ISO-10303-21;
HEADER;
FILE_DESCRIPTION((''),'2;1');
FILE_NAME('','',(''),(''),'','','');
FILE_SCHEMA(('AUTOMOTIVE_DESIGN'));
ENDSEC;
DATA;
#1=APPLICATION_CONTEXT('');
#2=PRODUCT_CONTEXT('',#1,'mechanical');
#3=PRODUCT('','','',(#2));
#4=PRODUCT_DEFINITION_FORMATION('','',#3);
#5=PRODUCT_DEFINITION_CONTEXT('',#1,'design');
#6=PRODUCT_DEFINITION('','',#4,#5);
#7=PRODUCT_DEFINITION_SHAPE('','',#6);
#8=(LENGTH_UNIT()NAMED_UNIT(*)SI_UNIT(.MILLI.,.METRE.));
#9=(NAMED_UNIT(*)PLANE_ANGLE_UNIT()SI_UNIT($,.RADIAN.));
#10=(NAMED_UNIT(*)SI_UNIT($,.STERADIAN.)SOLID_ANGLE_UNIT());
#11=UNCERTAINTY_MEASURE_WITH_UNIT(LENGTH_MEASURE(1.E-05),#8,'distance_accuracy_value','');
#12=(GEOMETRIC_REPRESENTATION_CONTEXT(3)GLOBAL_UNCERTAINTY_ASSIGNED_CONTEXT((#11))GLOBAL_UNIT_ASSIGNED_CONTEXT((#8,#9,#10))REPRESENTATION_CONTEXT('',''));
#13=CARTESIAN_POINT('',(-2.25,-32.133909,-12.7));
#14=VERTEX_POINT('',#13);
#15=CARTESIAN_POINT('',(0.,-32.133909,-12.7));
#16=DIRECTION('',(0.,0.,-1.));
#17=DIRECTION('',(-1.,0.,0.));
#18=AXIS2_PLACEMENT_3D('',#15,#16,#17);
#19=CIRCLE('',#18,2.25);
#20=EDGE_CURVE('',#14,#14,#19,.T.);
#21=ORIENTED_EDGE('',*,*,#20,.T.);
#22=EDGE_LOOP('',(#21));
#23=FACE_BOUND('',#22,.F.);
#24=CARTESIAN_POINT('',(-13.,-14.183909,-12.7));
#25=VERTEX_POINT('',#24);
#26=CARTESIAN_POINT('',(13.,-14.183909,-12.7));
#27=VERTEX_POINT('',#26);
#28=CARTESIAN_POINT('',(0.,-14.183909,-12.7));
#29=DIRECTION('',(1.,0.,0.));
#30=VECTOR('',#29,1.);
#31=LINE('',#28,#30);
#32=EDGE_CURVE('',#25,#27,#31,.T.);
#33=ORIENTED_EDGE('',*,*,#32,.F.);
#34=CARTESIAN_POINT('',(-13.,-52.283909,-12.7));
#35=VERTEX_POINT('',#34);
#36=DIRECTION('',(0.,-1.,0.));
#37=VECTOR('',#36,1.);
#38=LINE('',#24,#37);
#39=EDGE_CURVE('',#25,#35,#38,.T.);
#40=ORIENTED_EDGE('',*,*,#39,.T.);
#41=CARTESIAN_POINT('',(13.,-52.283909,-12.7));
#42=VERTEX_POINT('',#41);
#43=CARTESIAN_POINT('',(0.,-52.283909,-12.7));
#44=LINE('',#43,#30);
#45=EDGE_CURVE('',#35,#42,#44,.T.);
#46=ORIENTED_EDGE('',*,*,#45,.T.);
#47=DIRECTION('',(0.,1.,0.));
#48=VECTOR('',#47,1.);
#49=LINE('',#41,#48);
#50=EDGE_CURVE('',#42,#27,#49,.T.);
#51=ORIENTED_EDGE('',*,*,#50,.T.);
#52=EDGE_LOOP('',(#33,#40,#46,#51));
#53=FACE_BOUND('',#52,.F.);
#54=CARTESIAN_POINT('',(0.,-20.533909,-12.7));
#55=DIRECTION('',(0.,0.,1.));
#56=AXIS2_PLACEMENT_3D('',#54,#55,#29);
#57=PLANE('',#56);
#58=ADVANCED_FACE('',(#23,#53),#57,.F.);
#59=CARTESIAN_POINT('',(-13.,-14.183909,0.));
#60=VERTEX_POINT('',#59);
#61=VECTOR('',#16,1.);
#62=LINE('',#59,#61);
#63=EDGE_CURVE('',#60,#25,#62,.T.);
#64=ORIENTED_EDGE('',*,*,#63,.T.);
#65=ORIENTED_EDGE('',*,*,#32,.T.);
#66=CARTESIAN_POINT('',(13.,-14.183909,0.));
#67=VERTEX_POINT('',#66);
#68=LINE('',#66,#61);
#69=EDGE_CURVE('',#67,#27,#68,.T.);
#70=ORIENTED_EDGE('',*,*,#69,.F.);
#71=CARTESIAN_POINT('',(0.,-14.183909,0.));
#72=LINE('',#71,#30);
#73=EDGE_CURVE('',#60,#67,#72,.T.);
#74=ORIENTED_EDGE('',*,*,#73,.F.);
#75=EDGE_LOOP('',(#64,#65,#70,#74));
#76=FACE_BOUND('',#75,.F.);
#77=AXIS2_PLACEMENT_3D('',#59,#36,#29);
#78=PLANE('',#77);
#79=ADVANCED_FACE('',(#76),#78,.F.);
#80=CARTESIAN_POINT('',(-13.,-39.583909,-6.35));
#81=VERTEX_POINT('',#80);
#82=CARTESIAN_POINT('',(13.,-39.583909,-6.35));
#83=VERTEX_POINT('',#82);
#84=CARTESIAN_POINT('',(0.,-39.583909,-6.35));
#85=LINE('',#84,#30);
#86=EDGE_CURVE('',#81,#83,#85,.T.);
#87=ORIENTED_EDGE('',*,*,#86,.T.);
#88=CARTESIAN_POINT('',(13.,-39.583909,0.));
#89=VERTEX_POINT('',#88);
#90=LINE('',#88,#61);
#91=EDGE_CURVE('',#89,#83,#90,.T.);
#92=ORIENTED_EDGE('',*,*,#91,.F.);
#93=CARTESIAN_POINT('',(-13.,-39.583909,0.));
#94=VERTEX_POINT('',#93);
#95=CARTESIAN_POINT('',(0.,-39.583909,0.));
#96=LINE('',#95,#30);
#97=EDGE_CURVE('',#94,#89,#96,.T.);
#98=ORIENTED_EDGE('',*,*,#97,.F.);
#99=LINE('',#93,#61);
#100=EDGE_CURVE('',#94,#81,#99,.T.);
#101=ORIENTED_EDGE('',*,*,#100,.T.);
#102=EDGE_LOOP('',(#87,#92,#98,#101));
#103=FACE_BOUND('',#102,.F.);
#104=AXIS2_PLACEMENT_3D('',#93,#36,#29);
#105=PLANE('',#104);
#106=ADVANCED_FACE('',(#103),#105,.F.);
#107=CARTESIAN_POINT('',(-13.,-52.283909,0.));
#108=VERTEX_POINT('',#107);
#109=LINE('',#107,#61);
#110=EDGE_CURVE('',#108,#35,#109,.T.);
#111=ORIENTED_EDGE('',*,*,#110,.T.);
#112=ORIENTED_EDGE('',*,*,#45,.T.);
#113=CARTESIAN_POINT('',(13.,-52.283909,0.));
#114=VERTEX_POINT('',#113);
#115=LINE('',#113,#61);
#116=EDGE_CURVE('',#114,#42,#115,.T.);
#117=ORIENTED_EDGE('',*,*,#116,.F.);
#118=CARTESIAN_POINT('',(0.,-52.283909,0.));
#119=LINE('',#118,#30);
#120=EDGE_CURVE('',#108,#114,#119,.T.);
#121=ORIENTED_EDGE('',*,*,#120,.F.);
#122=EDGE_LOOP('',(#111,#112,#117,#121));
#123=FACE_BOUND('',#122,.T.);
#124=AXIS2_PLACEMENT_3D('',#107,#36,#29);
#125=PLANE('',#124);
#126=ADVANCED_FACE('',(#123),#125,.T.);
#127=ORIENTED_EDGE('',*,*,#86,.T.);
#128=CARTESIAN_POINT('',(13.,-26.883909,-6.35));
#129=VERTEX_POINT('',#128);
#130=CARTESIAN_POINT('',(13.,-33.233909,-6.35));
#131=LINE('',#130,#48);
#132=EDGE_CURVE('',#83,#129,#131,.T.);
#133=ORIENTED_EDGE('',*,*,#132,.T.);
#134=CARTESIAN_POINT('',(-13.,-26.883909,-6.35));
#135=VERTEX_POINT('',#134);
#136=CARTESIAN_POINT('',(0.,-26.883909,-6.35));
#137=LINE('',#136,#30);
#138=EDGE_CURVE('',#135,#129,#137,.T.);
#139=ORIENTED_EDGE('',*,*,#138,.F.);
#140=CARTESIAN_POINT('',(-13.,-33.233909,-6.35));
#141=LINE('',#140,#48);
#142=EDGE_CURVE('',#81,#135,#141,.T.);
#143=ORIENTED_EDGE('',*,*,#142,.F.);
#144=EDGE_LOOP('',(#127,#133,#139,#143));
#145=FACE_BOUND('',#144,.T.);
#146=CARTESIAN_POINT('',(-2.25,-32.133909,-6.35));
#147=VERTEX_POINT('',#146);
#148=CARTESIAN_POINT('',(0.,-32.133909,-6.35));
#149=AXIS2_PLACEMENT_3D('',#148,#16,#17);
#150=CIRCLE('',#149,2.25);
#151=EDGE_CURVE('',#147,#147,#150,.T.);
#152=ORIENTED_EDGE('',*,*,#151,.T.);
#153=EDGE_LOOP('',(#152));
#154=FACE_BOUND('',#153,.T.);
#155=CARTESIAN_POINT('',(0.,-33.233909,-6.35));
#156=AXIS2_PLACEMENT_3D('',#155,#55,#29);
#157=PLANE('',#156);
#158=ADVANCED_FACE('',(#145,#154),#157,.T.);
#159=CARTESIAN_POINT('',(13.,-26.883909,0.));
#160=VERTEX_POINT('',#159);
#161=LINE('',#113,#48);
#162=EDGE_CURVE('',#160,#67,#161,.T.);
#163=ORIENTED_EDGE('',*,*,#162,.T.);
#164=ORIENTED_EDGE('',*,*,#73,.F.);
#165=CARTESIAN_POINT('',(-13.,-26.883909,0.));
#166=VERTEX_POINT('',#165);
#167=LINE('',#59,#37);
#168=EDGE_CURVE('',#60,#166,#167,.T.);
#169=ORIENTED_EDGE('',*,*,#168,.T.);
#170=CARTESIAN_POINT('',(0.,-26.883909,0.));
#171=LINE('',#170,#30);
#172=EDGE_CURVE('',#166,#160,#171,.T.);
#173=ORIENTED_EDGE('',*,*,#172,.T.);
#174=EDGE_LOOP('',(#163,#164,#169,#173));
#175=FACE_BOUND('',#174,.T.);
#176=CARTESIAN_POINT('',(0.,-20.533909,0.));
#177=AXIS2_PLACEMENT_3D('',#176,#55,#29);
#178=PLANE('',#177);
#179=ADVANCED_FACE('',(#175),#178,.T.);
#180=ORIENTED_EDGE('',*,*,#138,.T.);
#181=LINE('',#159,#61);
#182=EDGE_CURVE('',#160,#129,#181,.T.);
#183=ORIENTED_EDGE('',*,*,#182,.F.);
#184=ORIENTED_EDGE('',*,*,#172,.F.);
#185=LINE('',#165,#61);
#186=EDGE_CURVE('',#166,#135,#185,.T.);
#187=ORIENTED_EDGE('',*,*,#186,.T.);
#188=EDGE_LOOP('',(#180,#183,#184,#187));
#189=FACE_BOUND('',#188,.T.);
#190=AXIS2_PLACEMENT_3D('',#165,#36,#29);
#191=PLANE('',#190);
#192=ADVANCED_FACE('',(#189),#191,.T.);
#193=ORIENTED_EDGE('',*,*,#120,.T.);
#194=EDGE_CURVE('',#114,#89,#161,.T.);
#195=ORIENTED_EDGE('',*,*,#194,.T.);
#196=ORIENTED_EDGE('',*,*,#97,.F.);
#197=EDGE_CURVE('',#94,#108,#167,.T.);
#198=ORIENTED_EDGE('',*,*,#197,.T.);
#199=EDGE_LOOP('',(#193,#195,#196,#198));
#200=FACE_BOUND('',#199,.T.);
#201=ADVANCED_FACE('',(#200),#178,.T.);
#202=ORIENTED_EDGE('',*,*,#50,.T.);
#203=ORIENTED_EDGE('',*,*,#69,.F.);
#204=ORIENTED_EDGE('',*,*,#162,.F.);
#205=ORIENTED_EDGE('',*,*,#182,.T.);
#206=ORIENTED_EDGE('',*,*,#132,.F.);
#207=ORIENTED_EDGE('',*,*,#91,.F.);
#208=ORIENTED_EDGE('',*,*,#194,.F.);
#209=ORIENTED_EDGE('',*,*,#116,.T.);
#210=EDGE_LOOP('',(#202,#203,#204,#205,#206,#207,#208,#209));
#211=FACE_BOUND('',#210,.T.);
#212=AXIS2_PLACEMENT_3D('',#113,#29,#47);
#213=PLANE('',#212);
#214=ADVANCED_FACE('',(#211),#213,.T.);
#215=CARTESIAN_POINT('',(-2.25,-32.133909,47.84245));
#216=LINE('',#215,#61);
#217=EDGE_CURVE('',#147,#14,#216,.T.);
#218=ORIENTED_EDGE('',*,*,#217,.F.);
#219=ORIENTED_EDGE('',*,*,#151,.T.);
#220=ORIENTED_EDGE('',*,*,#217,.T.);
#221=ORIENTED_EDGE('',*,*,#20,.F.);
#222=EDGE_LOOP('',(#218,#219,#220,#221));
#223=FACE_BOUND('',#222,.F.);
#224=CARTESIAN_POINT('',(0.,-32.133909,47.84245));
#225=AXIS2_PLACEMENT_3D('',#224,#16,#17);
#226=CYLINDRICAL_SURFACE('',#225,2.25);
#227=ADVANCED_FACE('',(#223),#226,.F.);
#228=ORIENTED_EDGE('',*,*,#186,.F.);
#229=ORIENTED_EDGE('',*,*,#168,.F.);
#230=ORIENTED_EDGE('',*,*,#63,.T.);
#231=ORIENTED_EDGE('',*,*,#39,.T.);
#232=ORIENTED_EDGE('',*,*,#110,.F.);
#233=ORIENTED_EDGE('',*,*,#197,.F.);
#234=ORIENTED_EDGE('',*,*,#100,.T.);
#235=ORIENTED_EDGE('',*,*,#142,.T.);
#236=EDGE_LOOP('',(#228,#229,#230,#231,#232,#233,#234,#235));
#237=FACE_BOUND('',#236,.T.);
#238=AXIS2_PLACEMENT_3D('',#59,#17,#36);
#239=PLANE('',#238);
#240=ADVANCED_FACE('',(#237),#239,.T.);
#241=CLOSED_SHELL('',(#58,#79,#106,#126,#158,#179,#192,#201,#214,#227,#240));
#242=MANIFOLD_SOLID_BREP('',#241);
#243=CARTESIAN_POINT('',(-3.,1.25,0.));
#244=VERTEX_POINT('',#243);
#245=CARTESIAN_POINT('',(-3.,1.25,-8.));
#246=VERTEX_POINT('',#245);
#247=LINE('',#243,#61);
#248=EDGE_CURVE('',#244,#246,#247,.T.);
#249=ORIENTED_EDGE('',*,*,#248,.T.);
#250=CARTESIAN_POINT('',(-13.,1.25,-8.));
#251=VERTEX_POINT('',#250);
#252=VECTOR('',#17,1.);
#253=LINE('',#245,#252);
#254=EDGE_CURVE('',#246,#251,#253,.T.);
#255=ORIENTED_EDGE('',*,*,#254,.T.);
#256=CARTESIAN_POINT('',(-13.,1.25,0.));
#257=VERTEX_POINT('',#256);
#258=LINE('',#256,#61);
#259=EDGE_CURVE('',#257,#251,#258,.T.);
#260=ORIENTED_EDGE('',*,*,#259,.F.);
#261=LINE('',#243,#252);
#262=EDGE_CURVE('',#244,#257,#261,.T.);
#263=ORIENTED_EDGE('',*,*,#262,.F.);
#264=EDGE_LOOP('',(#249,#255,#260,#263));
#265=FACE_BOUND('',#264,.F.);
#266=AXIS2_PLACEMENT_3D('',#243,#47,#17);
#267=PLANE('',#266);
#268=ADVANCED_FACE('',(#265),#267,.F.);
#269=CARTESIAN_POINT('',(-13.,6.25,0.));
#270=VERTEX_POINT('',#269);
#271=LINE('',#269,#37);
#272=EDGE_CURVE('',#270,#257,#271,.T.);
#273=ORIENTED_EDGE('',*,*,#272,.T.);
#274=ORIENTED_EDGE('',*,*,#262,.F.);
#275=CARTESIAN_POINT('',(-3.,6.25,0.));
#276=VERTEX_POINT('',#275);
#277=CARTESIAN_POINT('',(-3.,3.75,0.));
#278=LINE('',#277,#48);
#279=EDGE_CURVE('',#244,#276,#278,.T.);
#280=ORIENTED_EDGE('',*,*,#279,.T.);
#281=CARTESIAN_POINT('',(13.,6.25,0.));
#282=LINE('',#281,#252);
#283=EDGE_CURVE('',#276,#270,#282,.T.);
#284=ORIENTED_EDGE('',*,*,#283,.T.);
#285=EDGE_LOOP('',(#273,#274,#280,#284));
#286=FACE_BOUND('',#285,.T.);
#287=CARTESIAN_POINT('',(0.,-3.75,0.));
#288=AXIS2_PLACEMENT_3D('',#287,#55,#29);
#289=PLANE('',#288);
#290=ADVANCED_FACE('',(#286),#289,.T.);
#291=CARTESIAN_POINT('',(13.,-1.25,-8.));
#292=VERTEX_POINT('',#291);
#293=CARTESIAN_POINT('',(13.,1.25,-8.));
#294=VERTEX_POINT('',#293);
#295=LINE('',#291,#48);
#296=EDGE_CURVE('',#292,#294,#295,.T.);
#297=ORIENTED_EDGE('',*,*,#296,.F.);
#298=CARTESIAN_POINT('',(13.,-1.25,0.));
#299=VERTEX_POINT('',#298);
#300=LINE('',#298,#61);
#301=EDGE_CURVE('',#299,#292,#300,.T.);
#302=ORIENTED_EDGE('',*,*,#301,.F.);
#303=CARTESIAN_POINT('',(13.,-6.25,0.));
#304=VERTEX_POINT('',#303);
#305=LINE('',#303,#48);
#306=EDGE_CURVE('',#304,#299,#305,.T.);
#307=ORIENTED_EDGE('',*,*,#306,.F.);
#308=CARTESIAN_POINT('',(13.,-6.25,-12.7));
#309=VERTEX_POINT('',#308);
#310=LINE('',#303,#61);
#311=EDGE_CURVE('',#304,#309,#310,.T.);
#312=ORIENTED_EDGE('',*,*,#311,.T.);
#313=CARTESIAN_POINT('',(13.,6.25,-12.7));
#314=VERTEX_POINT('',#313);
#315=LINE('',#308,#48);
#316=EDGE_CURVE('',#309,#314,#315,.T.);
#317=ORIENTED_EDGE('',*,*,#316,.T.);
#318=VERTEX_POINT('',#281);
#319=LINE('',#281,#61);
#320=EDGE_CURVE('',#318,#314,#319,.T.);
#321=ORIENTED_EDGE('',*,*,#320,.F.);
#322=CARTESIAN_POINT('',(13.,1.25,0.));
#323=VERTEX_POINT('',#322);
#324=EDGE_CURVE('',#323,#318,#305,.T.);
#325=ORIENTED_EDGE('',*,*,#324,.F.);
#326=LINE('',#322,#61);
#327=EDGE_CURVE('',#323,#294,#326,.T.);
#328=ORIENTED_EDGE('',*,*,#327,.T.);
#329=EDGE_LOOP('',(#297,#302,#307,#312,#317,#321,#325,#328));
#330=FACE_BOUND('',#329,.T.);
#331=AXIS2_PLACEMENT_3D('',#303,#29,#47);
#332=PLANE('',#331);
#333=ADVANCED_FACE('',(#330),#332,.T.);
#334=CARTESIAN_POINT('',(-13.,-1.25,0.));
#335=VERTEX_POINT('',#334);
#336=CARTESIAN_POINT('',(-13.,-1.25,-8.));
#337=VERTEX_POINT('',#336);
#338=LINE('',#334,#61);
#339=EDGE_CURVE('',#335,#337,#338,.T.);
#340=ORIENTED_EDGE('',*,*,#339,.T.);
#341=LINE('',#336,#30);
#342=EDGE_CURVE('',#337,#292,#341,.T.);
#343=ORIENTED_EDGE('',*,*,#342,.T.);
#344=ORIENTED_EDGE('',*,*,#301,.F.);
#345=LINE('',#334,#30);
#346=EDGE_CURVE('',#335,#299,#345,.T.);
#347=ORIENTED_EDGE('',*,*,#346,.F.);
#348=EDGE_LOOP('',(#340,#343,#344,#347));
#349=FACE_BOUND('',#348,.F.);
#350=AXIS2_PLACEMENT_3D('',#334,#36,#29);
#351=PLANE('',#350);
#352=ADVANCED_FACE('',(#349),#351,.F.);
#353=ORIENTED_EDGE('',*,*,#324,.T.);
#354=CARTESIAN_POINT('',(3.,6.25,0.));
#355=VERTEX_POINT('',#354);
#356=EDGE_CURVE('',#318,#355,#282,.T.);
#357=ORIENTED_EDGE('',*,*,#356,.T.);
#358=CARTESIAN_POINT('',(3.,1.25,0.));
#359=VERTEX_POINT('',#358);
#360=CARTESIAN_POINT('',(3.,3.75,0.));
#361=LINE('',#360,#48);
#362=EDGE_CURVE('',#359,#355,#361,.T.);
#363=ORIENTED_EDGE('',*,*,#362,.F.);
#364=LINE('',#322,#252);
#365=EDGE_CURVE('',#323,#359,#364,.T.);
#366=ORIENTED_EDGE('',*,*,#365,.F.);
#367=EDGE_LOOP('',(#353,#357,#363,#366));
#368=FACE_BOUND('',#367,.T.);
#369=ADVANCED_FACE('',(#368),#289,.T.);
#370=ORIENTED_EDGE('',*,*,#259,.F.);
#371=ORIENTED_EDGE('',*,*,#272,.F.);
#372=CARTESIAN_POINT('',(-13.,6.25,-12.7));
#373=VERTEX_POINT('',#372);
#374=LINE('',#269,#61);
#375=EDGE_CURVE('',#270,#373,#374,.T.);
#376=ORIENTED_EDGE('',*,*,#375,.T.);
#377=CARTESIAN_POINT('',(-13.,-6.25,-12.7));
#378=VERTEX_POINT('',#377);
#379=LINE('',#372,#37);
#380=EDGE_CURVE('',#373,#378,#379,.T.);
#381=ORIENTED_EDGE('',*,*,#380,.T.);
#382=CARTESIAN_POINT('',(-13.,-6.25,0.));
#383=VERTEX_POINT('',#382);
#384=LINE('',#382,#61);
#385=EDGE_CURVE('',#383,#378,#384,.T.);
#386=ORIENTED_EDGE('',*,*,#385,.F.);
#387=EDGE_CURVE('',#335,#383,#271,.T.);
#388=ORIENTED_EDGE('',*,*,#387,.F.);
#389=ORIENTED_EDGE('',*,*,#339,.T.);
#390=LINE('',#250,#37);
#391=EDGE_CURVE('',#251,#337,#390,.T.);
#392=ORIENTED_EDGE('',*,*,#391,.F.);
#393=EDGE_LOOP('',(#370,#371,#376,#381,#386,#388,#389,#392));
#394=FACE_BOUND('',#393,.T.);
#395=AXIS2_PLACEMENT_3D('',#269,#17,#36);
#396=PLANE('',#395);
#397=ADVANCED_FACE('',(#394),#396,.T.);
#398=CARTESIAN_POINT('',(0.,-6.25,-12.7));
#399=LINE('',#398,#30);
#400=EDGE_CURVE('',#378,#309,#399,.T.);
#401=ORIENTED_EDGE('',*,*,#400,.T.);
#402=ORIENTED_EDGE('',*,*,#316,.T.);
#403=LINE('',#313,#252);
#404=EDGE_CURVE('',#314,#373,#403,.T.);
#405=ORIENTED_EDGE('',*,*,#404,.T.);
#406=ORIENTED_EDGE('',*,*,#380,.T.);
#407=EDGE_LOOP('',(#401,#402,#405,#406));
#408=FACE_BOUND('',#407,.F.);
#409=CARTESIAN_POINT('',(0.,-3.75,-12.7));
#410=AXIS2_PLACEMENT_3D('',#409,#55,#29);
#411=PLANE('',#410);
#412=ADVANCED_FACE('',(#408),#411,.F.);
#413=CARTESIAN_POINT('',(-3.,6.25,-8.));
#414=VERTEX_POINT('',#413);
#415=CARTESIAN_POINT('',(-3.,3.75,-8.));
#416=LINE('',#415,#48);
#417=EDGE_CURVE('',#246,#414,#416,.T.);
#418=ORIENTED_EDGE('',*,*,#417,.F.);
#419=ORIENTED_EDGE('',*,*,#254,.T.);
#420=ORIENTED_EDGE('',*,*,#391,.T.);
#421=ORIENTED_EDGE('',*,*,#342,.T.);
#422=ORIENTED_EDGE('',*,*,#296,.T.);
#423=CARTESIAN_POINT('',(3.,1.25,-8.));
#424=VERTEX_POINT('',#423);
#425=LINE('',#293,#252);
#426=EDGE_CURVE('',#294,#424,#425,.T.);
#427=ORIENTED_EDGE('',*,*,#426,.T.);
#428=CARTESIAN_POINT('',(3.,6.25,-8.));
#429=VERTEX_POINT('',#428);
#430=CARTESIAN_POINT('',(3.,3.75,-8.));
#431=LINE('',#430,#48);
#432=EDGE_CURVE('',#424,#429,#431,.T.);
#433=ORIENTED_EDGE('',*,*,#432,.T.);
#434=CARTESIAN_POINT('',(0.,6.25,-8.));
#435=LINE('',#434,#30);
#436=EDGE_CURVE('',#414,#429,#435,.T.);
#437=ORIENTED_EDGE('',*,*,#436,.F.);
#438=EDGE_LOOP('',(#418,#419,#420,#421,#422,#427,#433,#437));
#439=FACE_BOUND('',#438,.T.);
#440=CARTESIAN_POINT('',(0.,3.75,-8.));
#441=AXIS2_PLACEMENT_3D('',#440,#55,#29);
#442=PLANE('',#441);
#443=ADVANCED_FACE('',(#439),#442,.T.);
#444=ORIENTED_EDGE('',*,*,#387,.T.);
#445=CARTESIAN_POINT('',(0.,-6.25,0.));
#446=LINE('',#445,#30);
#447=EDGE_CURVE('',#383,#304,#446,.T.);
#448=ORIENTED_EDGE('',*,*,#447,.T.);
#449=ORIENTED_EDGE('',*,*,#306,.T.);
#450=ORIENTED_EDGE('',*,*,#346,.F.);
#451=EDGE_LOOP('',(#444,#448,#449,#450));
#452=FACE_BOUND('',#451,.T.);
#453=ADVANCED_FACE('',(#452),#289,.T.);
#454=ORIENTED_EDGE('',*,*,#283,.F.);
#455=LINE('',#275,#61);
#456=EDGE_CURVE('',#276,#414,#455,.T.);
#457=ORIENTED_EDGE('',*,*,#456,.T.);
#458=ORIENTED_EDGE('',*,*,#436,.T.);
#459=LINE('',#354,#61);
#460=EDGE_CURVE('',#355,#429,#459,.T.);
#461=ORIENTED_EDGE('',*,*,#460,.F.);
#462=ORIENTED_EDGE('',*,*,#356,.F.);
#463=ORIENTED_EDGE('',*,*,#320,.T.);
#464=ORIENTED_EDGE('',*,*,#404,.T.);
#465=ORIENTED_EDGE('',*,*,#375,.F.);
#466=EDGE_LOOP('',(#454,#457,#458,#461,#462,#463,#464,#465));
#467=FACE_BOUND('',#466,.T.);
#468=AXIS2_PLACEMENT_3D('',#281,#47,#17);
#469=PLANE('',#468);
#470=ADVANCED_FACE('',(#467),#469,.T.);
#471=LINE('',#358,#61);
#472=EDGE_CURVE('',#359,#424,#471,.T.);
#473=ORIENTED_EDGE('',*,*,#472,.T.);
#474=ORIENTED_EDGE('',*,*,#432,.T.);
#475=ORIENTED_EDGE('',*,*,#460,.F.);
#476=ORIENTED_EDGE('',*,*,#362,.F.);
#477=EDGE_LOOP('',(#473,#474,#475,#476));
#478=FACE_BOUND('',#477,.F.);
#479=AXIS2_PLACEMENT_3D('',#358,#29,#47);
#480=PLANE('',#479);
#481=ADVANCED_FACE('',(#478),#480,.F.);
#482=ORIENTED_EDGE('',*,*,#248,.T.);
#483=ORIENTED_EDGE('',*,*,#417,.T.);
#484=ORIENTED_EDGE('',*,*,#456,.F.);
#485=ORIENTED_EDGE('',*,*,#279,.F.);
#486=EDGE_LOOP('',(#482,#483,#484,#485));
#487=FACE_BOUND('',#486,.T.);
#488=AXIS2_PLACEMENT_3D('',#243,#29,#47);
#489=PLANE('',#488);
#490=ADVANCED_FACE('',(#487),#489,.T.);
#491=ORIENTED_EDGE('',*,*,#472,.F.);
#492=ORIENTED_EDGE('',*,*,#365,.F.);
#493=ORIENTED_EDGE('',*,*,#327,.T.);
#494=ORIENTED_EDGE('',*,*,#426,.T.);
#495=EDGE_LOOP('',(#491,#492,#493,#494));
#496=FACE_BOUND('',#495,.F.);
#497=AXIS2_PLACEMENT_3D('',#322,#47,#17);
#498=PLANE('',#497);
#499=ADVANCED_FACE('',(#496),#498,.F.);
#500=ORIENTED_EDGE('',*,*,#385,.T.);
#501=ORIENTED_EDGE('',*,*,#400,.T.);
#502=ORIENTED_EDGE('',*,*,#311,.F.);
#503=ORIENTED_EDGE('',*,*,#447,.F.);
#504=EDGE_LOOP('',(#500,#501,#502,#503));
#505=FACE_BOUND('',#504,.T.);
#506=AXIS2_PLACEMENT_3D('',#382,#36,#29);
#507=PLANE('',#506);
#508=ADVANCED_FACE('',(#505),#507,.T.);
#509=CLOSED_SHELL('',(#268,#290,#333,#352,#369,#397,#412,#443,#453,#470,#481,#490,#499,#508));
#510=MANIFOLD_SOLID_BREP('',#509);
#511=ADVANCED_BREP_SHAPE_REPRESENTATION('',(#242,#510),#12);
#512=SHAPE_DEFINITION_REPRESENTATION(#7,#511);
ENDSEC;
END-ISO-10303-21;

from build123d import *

# Parameters (mm, degrees)
F0_W     = 26
F0_H     = 5
F0_W_2   = 10
F0_W_3   = 6
F1_DEPTH = 12.7
F2_DEPTH = 8
F3_W     = 26
F3_H     = 12.7
F4_DEPTH = 12.7
F5_DEPTH = 6.35
F6_D     = 4.5


# Not quite as in the source:
# - a length typed as a fraction of an inch, garbled in the dataset ("3 / 203.2 mm" for 3/8 in), is restored


with BuildPart() as f1:
    # F0 (on Top) → F1 (new body)
    with BuildSketch(Plane.XY):
        with Locations((0, -3.75)):
            Rectangle(F0_W, F0_H)
        Polygon((-13, -1.25), (13, -1.25), (13, 1.25), (3, 1.25), (-3, 1.25), (-13, 1.25), align=None)
        with Locations((8, 3.75)):
            Rectangle(F0_W_2, F0_H)
        with Locations((-8, 3.75)):
            Rectangle(F0_W_2, F0_H)
        with Locations((0, 3.75)):
            Rectangle(F0_W_3, F0_H)
    extrude(amount=-F1_DEPTH)

    # F0 (on Top) → F2 (cut)
    with BuildSketch(Plane.XY):
        with Locations((0, 3.75)):
            Rectangle(F0_W_3, F0_H)
        Polygon((-13, -1.25), (13, -1.25), (13, 1.25), (3, 1.25), (-3, 1.25), (-13, 1.25), align=None)
    extrude(amount=-F2_DEPTH, mode=Mode.SUBTRACT)


with BuildPart() as f4:
    # F3 (on Top) → F4 (new body)
    with BuildSketch(Plane.XY):
        with Locations((0, -20.533909303)):
            Rectangle(F3_W, F3_H)
        with Locations((0, -33.233909303)):
            Rectangle(F3_W, F3_H)
        with Locations((0, -45.933909303)):
            Rectangle(F3_W, F3_H)
    extrude(amount=-F4_DEPTH)

    # F3 (on Top) → F5 (cut)
    with BuildSketch(Plane.XY):
        with Locations((0, -33.233909303)):
            Rectangle(F3_W, F3_H)
    extrude(amount=-F5_DEPTH, mode=Mode.SUBTRACT)

    # F6 (through all)
    with Locations(Plane.XY):
        with Locations((0, -32.133909303)):
            Hole(F6_D / 2)


solid = Compound([f1.part, f4.part])
